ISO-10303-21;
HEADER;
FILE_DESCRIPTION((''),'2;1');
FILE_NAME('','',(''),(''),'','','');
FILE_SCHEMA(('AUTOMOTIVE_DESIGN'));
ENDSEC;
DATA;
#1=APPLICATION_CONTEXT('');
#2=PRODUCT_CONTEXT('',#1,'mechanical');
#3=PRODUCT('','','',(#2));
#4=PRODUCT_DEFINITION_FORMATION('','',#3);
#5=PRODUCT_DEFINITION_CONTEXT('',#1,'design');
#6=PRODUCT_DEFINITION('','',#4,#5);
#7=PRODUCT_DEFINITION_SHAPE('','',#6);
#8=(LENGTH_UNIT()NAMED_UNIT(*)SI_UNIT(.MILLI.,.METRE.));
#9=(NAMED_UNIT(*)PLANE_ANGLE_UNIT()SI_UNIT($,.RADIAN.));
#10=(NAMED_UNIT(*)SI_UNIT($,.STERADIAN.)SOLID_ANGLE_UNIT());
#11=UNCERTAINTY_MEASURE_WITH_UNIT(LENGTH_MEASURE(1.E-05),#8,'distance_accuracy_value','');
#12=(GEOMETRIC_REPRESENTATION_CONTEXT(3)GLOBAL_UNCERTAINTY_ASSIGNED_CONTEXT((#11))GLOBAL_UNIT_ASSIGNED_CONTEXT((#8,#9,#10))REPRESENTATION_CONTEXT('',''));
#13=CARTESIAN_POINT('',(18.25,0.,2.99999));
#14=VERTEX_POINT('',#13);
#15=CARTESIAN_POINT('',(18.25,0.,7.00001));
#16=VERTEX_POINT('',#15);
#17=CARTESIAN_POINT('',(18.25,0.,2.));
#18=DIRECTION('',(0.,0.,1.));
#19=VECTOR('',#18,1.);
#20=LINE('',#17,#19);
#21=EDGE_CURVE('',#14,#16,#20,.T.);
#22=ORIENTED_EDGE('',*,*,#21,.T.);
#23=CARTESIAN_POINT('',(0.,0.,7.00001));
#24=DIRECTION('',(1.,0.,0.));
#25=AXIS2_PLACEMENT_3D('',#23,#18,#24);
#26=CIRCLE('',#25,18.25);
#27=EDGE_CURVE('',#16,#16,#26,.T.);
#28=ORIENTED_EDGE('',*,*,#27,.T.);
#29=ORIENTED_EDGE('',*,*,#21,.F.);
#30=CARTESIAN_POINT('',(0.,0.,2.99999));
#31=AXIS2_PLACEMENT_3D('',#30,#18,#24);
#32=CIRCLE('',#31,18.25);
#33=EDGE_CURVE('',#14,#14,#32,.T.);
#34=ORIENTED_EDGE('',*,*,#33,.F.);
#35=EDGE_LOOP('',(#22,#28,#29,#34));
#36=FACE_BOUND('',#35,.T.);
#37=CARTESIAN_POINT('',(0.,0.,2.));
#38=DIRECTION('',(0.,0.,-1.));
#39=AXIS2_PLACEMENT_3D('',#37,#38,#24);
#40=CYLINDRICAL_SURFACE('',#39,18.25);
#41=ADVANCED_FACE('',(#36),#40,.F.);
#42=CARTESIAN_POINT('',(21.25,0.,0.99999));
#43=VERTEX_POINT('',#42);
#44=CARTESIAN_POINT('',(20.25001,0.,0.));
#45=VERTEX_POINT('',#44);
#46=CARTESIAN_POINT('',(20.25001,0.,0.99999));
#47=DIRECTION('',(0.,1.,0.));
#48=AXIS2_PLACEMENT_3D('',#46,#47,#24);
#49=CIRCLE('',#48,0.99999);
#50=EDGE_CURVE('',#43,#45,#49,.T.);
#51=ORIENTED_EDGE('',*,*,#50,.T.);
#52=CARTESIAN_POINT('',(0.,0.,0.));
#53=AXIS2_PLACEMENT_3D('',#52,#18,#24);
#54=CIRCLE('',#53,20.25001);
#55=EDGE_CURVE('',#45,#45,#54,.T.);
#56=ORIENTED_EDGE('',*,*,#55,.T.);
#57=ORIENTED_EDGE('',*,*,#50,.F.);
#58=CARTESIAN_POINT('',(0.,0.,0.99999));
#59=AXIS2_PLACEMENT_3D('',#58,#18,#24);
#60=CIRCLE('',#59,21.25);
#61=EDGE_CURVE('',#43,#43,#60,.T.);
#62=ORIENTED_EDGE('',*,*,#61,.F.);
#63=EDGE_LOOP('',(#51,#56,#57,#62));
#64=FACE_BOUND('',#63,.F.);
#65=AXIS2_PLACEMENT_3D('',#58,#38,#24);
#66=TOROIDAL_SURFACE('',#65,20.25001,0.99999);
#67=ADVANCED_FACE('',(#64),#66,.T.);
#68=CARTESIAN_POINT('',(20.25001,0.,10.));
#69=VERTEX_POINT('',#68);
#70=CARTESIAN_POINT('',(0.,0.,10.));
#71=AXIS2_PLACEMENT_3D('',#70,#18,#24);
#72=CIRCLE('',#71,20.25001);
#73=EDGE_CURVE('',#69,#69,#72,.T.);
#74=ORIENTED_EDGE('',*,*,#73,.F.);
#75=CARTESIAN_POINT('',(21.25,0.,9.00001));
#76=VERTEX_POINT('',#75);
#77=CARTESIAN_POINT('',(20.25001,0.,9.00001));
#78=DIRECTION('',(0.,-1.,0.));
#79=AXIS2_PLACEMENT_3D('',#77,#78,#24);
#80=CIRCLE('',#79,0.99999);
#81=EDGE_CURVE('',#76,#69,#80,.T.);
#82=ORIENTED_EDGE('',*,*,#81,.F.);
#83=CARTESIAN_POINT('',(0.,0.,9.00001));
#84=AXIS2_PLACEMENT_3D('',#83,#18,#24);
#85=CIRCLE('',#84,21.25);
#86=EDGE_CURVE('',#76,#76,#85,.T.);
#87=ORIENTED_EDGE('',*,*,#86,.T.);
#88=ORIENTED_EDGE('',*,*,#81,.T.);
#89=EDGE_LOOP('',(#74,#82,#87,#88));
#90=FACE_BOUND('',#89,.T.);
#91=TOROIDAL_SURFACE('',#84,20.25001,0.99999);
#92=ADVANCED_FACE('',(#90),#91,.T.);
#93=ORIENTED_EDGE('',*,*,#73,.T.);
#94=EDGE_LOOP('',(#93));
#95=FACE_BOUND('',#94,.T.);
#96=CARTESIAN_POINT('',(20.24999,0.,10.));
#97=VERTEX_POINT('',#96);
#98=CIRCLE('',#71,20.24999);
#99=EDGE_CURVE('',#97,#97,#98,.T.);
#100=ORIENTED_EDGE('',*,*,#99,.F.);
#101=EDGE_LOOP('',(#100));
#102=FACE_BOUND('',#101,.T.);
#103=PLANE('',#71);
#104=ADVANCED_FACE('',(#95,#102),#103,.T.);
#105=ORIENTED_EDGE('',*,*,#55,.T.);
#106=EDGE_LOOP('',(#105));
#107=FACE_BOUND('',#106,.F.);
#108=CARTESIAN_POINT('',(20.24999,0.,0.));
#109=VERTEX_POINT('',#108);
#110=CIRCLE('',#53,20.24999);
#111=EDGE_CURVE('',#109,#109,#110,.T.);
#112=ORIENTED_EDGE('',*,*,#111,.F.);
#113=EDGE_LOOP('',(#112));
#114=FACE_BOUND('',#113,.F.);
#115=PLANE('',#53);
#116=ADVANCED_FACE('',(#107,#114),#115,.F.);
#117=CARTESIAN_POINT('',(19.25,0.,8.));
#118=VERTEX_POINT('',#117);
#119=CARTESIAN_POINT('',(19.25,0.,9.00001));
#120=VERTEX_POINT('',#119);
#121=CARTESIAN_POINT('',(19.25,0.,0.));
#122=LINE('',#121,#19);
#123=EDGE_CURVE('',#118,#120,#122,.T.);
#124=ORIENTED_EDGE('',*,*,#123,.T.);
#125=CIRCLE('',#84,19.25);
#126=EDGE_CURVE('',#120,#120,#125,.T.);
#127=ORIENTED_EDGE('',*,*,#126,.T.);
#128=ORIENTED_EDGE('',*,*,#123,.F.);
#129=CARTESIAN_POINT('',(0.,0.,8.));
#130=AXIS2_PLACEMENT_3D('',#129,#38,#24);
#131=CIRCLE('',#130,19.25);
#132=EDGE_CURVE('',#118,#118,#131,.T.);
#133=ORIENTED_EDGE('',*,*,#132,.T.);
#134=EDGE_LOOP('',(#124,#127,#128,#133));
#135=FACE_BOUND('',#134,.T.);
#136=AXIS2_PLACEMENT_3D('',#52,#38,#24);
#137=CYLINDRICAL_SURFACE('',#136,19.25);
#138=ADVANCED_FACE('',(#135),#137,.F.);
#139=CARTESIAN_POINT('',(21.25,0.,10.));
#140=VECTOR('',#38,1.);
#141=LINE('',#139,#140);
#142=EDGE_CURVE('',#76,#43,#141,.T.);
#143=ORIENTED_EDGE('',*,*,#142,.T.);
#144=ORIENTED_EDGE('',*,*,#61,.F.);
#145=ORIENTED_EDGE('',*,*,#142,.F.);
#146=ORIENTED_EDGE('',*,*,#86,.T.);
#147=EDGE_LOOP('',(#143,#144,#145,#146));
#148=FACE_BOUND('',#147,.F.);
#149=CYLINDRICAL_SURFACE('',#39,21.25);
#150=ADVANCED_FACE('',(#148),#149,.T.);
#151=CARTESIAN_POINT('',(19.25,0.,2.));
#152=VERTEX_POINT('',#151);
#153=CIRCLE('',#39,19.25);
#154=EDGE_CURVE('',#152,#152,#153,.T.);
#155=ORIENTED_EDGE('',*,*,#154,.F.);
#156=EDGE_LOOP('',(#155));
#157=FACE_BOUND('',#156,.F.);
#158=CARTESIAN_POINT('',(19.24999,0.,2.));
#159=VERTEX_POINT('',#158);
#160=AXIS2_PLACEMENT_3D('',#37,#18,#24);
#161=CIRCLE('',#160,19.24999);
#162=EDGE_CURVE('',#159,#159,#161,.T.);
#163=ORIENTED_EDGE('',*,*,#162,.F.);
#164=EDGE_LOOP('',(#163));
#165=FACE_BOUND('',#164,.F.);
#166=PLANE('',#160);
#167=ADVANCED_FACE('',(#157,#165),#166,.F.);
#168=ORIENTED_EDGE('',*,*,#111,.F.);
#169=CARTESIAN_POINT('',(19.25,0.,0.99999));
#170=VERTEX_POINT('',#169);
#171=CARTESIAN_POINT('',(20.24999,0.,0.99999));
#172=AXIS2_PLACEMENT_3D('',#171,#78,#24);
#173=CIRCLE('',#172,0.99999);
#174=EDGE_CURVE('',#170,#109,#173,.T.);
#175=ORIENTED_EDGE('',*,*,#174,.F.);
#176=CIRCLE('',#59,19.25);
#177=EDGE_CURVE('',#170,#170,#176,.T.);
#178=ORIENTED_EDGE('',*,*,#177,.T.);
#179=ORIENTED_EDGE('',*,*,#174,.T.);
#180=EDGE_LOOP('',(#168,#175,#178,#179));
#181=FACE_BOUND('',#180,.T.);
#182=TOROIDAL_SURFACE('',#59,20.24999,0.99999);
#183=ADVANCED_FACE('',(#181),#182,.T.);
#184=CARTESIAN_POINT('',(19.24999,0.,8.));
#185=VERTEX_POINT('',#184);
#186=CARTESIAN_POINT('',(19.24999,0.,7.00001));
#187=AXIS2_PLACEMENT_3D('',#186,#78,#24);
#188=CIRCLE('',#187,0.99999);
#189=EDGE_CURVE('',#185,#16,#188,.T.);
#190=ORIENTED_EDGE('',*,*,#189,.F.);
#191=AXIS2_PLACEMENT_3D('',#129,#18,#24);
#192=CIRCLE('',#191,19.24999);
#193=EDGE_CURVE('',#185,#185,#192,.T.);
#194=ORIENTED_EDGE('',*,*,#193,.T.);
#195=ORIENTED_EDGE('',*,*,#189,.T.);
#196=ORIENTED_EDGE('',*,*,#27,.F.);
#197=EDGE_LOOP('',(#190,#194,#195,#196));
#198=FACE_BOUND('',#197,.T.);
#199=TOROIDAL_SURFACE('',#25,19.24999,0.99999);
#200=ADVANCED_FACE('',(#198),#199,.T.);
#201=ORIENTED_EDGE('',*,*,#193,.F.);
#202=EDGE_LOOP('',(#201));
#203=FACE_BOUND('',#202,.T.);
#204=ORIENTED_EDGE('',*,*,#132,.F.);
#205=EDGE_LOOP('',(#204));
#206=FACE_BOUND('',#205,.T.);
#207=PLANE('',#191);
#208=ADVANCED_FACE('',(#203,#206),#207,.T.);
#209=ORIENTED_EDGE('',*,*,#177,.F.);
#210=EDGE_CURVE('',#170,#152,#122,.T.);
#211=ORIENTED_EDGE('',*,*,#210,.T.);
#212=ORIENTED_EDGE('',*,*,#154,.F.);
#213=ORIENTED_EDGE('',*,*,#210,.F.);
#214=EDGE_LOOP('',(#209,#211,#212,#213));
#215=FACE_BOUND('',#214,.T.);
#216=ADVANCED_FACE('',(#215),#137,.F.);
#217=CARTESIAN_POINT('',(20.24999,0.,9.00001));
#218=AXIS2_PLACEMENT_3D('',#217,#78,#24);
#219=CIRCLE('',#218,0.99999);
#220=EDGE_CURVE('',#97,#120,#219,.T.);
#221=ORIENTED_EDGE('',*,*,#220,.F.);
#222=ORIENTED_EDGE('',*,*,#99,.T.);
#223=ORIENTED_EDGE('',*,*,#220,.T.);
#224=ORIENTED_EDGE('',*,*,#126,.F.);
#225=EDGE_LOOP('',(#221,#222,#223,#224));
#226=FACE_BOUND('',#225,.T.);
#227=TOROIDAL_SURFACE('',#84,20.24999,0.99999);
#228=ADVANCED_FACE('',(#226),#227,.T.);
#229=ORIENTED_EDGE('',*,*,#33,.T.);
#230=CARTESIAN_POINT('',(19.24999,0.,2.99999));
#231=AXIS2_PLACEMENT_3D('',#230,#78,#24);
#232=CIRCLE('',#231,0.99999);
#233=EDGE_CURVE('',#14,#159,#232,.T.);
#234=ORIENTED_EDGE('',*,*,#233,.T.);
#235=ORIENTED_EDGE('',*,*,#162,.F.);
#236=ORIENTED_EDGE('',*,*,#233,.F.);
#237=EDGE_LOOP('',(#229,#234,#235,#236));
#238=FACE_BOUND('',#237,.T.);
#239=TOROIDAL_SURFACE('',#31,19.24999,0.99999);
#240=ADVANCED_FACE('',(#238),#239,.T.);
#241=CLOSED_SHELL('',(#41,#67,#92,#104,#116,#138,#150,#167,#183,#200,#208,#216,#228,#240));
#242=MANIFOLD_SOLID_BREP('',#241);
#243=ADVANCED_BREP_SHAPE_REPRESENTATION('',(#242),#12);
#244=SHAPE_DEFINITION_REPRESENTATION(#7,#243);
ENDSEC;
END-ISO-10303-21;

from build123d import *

# Parameters (mm, degrees)
F0_R     = 21.25
F0_R_2   = 19.25
F1_DEPTH = 10
F3_R     = 21.25
F3_R_2   = 18.25
F4_DEPTH = 6
F5_R     = 0.99999


# Not quite as in the source:
# - a fillet or chamfer is up to 0.001 mm smaller than in the source, because OpenCascade refuses the exact size


with BuildPart() as f1:
    # F0 (on Top) → F1 (new body)
    with BuildSketch(Plane.XY):
        Circle(F0_R)
        Circle(F0_R_2, mode=Mode.SUBTRACT)
    extrude(amount=F1_DEPTH)

    # F3 (on offset) → F4 (join)
    with BuildSketch(Plane.XY.offset(2)):
        Circle(F3_R)
        Circle(F3_R_2, mode=Mode.SUBTRACT)
    extrude(amount=F4_DEPTH)

    # F5 (radius 1 in the source; OpenCascade refuses exactly that, so slightly less here)
    f5_edges = [f1.edges().sort_by_distance(p)[0] for p in [
        (-18.25, 0, 2),
        (-18.25, 0, 8),
        (-19.25, 0, 10),
        (-21.25, 0, 10),
        (-21.25, 0, 0),
        (-19.25, 0, 0),
    ]]
    fillet(f5_edges, radius=F5_R)


solid = f1.part
